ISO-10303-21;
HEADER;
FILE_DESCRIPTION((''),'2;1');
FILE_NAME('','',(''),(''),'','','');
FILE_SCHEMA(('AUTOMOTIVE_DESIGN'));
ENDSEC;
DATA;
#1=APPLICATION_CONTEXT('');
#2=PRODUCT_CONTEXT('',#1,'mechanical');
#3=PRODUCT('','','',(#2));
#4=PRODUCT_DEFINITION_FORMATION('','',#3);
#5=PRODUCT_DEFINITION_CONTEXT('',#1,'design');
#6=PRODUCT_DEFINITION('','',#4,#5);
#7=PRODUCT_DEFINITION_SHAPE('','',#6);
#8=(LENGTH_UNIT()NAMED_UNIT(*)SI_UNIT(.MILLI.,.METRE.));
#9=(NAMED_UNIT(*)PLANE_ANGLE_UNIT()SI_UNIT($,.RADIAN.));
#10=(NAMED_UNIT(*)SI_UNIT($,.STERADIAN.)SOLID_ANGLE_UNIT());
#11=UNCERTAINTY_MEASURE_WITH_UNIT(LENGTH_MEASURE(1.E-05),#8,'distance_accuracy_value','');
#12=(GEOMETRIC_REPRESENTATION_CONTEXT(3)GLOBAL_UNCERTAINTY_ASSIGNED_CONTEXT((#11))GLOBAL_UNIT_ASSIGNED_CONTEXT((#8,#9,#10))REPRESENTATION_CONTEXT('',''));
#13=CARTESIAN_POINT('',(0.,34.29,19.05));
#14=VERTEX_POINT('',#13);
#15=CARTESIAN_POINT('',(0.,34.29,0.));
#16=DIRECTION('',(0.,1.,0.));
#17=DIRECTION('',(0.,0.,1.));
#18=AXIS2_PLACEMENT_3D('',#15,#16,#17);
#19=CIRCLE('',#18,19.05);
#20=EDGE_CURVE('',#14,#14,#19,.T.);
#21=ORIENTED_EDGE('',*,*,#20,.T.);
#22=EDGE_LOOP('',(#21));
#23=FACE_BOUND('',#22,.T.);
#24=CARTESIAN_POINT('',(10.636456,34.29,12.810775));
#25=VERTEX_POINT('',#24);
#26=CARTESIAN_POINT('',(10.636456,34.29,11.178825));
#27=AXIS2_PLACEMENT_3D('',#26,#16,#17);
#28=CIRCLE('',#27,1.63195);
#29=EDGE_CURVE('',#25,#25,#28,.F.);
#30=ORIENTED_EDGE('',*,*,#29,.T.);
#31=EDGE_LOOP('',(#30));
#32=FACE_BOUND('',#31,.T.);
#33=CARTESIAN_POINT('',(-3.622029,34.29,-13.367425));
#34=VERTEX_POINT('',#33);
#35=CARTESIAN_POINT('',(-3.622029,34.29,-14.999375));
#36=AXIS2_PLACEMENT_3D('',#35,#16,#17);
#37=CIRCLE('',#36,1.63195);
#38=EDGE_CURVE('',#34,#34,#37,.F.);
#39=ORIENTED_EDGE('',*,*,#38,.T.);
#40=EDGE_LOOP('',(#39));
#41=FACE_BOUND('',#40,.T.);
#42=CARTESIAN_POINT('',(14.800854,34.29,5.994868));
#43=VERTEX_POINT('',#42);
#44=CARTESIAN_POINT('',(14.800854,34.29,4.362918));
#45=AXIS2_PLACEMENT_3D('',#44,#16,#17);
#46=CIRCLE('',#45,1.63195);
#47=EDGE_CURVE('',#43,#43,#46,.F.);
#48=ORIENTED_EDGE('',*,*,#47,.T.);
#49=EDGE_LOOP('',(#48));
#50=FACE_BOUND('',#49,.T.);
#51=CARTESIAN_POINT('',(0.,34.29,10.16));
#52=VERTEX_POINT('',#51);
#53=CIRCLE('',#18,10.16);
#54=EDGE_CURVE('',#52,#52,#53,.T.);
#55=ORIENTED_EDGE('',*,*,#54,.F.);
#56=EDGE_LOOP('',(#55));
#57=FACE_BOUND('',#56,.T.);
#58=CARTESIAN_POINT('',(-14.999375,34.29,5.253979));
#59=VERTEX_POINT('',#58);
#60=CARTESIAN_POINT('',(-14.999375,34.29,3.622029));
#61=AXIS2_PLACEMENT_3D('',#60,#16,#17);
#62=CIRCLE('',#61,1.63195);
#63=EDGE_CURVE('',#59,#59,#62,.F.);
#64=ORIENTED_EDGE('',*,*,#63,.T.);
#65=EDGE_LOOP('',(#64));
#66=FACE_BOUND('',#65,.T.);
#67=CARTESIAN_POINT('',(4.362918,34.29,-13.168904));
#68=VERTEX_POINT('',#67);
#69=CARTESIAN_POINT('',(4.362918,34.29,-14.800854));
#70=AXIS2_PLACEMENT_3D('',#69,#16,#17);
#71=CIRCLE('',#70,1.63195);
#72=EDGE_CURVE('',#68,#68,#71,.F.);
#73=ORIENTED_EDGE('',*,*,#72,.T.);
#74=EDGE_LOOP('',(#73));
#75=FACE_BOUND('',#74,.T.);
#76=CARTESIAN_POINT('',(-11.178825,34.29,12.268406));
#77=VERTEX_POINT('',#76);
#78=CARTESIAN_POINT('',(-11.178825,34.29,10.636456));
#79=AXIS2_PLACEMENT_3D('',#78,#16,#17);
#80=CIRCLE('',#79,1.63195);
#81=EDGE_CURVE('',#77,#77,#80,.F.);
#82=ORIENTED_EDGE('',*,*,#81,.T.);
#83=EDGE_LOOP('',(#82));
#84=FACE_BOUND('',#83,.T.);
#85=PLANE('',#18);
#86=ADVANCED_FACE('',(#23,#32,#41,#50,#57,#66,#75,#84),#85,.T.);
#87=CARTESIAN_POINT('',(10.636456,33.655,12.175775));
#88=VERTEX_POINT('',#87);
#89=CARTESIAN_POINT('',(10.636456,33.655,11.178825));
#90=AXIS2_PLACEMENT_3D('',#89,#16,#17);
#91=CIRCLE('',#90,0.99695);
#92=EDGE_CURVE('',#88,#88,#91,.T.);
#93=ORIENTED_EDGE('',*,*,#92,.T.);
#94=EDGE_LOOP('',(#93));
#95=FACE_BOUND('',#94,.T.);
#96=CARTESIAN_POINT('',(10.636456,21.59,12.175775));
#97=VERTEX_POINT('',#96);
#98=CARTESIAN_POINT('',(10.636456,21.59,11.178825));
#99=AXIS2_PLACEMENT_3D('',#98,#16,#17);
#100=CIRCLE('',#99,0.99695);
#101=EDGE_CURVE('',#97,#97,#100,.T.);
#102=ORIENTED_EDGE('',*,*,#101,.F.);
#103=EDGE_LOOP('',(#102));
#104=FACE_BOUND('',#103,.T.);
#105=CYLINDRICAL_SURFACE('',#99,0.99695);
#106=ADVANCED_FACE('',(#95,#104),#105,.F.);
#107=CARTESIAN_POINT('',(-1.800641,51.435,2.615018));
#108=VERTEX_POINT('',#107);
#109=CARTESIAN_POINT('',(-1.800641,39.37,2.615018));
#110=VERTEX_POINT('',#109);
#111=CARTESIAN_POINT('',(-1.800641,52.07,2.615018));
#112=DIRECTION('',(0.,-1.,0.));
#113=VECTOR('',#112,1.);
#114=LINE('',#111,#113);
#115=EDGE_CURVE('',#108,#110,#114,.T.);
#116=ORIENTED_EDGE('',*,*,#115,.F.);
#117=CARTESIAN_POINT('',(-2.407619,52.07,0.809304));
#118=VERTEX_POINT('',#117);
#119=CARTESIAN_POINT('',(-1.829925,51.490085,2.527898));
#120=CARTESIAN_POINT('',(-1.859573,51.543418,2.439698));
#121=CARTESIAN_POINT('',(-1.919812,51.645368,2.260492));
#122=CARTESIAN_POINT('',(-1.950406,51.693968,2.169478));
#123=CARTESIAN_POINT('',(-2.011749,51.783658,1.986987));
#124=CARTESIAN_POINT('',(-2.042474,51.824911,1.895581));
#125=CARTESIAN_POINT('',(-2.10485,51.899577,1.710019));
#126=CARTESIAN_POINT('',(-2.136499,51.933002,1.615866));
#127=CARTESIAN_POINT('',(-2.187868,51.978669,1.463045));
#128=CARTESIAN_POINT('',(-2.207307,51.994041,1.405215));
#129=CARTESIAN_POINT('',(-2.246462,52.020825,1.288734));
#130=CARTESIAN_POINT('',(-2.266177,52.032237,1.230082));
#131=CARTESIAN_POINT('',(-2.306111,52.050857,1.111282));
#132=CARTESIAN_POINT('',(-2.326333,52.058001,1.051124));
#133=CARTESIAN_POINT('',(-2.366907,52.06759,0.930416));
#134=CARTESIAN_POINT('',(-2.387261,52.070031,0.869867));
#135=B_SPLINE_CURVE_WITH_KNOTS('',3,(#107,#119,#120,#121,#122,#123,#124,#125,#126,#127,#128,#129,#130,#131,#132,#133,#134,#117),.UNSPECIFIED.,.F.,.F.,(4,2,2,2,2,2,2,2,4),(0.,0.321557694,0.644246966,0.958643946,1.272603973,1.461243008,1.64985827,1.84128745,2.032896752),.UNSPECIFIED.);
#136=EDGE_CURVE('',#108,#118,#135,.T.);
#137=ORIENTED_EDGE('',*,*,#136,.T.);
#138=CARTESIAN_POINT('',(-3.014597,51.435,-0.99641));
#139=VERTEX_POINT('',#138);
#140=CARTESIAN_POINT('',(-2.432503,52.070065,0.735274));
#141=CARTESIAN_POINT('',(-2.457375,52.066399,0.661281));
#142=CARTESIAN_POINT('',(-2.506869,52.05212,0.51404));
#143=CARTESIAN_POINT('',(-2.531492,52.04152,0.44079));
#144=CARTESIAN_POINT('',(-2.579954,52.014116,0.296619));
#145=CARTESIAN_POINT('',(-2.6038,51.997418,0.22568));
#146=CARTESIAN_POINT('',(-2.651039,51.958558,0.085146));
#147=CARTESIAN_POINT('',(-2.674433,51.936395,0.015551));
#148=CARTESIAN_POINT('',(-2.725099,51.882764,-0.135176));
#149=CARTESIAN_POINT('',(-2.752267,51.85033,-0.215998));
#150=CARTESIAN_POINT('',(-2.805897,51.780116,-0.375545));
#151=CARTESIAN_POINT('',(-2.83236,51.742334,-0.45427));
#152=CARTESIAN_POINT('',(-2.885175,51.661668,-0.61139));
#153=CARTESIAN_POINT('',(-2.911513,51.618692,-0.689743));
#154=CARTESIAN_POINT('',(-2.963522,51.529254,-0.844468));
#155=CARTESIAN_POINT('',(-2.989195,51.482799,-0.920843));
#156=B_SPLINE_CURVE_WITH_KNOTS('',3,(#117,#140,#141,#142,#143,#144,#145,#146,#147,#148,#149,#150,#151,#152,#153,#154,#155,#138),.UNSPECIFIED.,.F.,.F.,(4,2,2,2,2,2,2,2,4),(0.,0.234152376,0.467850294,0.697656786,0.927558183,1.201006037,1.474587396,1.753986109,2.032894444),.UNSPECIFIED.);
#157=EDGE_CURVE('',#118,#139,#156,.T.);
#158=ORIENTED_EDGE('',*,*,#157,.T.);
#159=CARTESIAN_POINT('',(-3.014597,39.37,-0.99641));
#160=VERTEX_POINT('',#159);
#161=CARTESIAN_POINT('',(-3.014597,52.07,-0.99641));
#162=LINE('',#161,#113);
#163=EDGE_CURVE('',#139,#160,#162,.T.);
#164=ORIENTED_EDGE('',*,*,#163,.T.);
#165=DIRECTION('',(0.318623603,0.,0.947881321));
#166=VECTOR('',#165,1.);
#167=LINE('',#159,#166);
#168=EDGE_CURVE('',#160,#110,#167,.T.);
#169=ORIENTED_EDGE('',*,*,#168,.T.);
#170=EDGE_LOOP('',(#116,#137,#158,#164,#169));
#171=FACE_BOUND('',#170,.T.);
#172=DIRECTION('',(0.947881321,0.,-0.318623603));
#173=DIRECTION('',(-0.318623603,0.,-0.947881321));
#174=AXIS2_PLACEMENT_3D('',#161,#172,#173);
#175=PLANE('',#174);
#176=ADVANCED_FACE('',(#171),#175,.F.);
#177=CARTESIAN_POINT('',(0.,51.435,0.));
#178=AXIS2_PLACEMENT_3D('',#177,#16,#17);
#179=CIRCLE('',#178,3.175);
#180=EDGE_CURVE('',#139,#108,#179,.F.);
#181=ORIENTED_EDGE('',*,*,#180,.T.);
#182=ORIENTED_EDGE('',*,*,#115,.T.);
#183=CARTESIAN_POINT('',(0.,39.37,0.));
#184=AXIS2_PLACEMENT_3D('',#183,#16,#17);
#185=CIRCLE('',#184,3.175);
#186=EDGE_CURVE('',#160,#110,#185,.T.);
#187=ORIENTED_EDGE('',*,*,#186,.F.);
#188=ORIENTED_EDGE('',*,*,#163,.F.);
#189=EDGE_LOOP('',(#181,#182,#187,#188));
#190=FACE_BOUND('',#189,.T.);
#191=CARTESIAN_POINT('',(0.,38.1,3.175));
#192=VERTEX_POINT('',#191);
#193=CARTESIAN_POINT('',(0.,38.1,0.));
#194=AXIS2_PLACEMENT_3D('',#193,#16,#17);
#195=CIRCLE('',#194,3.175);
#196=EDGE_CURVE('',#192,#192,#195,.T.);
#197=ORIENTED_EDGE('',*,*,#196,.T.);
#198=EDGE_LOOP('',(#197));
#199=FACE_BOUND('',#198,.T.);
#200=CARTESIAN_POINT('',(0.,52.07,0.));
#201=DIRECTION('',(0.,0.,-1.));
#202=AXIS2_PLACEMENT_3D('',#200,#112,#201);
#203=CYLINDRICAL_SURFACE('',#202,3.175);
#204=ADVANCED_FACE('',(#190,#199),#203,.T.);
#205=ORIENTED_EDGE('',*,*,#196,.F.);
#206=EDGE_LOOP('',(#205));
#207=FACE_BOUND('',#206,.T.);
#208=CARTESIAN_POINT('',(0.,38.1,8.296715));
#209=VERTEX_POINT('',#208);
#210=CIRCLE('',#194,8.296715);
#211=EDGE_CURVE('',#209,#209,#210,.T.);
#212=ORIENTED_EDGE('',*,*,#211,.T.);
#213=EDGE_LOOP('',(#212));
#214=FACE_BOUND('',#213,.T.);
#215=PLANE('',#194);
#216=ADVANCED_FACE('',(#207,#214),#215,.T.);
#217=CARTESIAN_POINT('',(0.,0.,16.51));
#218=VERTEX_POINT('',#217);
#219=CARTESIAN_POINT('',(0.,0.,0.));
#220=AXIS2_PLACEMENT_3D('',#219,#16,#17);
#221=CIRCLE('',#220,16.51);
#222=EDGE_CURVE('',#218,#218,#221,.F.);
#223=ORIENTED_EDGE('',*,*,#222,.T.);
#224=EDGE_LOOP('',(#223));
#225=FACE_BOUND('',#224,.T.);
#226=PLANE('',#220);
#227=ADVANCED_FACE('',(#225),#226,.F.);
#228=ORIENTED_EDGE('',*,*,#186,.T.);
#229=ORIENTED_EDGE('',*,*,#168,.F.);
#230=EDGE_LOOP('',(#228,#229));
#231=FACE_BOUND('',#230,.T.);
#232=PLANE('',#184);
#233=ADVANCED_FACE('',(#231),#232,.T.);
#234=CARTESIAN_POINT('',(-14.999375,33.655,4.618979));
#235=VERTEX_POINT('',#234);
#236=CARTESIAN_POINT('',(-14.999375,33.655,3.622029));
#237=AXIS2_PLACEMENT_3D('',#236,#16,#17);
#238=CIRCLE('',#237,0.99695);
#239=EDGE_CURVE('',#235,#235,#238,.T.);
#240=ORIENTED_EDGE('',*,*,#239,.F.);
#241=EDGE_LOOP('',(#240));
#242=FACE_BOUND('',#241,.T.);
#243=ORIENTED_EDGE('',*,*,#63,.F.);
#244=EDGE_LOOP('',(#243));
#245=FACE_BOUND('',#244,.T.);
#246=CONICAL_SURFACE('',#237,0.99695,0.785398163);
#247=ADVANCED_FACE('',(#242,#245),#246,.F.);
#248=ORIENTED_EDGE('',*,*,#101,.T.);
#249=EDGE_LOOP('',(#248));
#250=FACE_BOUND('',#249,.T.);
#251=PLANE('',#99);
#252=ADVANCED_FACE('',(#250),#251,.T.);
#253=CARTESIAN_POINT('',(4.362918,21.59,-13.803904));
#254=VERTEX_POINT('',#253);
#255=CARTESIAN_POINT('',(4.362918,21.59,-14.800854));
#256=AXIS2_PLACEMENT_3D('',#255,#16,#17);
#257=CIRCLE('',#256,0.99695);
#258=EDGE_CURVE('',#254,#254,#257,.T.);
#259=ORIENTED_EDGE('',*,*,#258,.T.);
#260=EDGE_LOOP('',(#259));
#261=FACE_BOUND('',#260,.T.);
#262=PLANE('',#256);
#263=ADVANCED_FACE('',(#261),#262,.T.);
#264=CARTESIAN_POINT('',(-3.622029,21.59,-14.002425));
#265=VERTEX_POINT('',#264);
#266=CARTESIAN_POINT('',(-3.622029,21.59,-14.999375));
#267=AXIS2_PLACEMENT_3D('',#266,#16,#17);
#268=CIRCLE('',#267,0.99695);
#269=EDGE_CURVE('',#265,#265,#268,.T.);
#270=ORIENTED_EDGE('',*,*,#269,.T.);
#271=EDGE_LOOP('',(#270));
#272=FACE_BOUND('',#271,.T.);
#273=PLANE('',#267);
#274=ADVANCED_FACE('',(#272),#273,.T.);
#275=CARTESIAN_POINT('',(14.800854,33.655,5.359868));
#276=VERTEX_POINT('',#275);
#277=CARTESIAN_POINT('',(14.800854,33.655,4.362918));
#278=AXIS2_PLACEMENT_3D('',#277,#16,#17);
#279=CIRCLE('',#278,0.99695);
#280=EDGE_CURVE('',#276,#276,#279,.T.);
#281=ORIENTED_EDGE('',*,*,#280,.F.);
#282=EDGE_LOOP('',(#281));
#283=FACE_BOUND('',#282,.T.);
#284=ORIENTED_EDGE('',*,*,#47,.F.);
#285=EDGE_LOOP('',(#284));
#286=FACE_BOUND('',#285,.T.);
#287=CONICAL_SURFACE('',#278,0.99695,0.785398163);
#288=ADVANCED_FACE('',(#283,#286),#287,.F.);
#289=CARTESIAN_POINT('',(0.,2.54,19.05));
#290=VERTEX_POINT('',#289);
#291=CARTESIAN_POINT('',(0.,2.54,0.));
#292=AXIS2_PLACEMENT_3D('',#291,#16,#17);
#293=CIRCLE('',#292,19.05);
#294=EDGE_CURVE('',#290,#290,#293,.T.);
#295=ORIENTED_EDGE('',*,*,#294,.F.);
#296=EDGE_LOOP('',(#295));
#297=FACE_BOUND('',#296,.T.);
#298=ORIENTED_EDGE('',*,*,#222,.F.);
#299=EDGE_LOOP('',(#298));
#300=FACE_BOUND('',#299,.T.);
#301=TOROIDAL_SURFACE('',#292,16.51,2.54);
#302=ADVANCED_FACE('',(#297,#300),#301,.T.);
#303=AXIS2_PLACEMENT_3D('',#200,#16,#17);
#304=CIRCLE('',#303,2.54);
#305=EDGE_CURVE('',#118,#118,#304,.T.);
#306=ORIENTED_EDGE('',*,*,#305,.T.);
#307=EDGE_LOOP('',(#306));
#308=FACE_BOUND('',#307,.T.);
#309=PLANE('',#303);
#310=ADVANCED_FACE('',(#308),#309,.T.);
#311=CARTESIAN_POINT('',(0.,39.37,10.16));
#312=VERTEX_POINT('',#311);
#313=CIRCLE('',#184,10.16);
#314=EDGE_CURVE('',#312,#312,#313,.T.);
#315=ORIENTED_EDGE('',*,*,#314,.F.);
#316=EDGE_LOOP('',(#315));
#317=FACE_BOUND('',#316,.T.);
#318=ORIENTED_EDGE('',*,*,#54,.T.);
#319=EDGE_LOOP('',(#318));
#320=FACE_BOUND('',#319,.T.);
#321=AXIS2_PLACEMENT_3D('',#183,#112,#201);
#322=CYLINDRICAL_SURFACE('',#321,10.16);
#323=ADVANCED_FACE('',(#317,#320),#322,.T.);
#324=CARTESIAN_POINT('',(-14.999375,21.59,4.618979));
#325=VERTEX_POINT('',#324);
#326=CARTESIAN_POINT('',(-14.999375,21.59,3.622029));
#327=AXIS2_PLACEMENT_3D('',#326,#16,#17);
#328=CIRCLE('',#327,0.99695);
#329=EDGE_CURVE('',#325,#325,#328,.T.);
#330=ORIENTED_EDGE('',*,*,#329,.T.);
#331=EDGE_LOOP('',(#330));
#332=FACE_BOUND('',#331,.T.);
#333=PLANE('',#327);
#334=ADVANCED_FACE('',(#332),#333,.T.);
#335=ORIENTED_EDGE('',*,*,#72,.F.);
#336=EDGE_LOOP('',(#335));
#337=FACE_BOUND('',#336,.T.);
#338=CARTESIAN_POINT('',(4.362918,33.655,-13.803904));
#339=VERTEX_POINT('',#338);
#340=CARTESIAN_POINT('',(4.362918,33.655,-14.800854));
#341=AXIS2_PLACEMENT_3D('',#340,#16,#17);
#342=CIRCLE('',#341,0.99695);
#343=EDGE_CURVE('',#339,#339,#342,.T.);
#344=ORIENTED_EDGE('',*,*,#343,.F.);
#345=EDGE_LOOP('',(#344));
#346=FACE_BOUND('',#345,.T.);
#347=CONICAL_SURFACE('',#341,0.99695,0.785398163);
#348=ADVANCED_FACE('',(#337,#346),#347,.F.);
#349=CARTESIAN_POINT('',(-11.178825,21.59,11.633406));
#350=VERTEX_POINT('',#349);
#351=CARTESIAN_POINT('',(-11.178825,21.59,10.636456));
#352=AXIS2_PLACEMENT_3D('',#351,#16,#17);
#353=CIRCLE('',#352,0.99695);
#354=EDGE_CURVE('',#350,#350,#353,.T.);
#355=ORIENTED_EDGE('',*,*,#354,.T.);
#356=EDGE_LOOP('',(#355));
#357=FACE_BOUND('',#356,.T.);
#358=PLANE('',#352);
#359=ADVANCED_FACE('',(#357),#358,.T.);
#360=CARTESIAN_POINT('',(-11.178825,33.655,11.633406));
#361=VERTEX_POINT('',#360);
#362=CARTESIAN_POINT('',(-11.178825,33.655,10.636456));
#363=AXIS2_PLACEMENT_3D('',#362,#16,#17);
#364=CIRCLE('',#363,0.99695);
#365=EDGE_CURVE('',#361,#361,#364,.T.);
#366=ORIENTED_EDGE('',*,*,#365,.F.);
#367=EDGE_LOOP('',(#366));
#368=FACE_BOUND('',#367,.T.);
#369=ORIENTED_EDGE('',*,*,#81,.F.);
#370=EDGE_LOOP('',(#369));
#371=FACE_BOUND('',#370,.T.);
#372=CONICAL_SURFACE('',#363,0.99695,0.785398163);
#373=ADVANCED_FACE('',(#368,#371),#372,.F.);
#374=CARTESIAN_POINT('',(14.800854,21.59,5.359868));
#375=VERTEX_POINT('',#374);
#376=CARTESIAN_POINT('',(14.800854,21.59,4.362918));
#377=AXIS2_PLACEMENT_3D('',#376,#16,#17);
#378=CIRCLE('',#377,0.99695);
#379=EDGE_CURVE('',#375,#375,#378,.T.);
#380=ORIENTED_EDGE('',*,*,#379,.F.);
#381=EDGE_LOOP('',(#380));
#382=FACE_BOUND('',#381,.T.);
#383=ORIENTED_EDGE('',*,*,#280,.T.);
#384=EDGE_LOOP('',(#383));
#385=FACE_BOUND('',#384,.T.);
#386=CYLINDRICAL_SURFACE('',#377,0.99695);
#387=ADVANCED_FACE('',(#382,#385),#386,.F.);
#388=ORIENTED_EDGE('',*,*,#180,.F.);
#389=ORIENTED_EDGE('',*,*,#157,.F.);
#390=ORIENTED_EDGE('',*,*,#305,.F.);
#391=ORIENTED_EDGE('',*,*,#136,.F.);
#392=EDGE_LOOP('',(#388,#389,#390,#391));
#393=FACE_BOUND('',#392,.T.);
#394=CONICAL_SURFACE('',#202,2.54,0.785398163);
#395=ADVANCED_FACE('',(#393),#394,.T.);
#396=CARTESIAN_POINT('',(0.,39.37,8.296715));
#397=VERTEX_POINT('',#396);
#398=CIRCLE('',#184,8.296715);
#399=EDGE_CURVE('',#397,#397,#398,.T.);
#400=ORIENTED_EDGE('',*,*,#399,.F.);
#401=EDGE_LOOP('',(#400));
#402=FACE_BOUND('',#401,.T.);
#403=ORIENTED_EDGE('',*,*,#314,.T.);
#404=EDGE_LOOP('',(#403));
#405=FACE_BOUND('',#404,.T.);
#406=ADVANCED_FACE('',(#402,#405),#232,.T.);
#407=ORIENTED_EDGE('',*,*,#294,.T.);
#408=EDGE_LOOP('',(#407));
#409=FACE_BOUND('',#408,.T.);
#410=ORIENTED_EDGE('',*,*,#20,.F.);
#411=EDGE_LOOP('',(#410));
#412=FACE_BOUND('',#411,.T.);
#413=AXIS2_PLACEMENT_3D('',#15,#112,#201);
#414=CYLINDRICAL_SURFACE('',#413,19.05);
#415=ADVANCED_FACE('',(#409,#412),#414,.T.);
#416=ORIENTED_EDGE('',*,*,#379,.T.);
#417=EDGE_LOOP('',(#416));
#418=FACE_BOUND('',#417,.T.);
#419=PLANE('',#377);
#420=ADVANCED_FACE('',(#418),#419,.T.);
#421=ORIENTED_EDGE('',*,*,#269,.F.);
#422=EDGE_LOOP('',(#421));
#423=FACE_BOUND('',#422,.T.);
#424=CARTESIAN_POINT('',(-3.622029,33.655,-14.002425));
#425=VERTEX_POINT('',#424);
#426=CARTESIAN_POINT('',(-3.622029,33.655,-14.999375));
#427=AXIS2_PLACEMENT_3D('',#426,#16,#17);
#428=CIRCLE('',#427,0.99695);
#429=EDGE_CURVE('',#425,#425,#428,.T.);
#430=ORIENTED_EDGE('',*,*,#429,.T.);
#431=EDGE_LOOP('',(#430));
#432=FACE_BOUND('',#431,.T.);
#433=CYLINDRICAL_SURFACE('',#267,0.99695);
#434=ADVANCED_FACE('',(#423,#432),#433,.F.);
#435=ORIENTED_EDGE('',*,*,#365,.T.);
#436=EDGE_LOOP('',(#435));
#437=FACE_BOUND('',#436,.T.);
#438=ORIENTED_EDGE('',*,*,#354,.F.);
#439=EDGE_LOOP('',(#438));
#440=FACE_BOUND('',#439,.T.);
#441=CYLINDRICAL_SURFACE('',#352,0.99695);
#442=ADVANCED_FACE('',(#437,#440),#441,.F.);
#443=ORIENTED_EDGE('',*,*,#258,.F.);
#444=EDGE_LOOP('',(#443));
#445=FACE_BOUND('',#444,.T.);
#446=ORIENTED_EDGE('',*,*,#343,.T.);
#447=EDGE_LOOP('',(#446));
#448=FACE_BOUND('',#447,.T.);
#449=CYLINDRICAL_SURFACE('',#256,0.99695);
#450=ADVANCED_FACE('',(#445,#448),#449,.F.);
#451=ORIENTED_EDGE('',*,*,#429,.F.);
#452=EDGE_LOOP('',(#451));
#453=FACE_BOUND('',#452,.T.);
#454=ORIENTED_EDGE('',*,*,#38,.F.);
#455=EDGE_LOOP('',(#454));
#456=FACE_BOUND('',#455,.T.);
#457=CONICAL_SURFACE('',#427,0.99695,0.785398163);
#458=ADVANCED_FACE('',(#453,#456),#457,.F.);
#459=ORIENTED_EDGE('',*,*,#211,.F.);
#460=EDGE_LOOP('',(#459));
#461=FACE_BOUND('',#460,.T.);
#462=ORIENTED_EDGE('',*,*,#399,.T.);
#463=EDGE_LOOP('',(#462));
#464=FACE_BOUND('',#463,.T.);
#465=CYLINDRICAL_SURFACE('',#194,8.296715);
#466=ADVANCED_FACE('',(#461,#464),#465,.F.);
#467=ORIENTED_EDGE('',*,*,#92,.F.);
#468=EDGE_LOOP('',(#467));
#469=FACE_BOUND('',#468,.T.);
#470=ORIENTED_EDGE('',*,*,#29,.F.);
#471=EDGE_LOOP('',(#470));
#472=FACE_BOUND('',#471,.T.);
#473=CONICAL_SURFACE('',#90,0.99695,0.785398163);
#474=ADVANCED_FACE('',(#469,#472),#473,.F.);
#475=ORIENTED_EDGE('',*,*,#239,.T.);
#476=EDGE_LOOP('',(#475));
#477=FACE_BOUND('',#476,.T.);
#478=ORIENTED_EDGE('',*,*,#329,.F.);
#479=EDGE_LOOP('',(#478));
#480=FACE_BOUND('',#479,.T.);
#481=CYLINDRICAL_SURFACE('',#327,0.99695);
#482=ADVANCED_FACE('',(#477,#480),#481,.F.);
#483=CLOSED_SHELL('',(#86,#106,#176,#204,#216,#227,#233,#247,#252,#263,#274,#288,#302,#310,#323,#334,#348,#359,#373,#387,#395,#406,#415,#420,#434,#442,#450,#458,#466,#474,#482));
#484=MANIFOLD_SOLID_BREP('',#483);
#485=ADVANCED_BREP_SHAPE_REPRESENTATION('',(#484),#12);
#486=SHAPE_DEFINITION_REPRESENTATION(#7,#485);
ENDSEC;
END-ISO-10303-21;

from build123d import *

# Parameters (mm, degrees)
SKETCH1_R           = 19.05
BOSS_EXTRUDE1_DEPTH = 34.29
SKETCH3_R           = 10.16
BOSS_EXTRUDE3_DEPTH = 5.08
BOSS_EXTRUDE4_DEPTH = 12.7
FILLET1_R           = 2.54
CHAMFER1_SIZE       = 0.635
SKETCH5_R           = 0.99695
CUT_EXTRUDE1_DEPTH  = 12.7
CHAMFER2_SIZE       = 0.635
CUT_EXTRUDE2_START  = -1.27
SKETCH6_R           = 8.296715315
SKETCH6_R_2         = 3.175
CUT_EXTRUDE2_DEPTH  = 1.27


with BuildPart() as part:
    # Sketch1 → Boss-Extrude1 (new body)
    with BuildSketch(Plane(origin=(0, 0, 0), x_dir=(1, 0, 0), z_dir=(0, 1, 0))):
        with Locations(Location((0, 0, 0), (0, 0, 270))):
            Circle(SKETCH1_R)
    extrude(amount=BOSS_EXTRUDE1_DEPTH)

    # Sketch3 → Boss-Extrude3 (add)
    with BuildSketch(Plane(origin=(0, 34.29, 0), x_dir=(1, 0, 0), z_dir=(0, 1, 0))):
        with Locations(Location((0, 0, 0), (0, 0, 270))):
            Circle(SKETCH3_R)
    extrude(amount=BOSS_EXTRUDE3_DEPTH)

    # Sketch4 → Boss-Extrude4 (add)
    with BuildSketch(Plane(origin=(0, 39.37, 0), x_dir=(1, 0, 0), z_dir=(0, 1, 0))):
        with BuildLine():
            Line((-3.01459652, 0.996409965), (-1.800640593, -2.615017869))
            ThreePointArc((-1.800640593, -2.615017869), (3.009523196, 1.01162994), (-3.01459652, 0.996409965))
        make_face()
    extrude(amount=BOSS_EXTRUDE4_DEPTH)

    # Fillet1
    fillet1_edges = [part.edges().sort_by_distance(p)[0] for p in [
        (0, 0, -19.05),
    ]]
    fillet(fillet1_edges, radius=FILLET1_R)

    # Chamfer1
    chamfer1_edges = [part.edges().sort_by_distance(p)[0] for p in [
        (3.009523196, 52.07, -1.01162994),
    ]]
    chamfer(chamfer1_edges, length=CHAMFER1_SIZE - 0.0001)  # a hair under: the kernel refuses the full size

    # Sketch5 → Cut-Extrude1 (cut)
    with BuildSketch(Plane(origin=(0, 34.29, 0), x_dir=(1, 0, 0), z_dir=(0, 1, 0))):
        with Locations(Location((-11.178825066, -10.636456195, 0), (0, 0, 270))):
            Circle(SKETCH5_R)
        with Locations(Location((-14.999374589, -3.622028738, 0), (0, 0, 270))):
            Circle(SKETCH5_R)
        with Locations(Location((-3.622028738, 14.999374589, 0), (0, 0, 270))):
            Circle(SKETCH5_R)
        with Locations(Location((4.362918394, 14.800853804, 0), (0, 0, 270))):
            Circle(SKETCH5_R)
        with Locations(Location((14.800853804, -4.362918394, 0), (0, 0, 270))):
            Circle(SKETCH5_R)
        with Locations(Location((10.636456195, -11.178825066, 0), (0, 0, 270))):
            Circle(SKETCH5_R)
    extrude(amount=-CUT_EXTRUDE1_DEPTH, mode=Mode.SUBTRACT)

    # Chamfer2
    chamfer2_edges = [part.edges().sort_by_distance(p)[0] for p in [
        (10.636456195, 34.29, 10.181875066),
        (14.800853804, 34.29, 3.365968394),
        (4.362918394, 34.29, -15.797803804),
        (-3.622028738, 34.29, -15.996324589),
        (-14.999374589, 34.29, 2.625078738),
        (-11.178825066, 34.29, 9.639506195),
    ]]
    chamfer(chamfer2_edges, length=CHAMFER2_SIZE)

    # Sketch6 → Cut-Extrude2 (cut)
    with BuildSketch(Plane(origin=(0, 39.37, 0), x_dir=(1, 0, 0), z_dir=(0, 1, 0)).offset(CUT_EXTRUDE2_START)):
        with Locations(Location((0, 0, 0), (0, 0, 270))):
            Circle(SKETCH6_R)
        with Locations(Location((0, 0, 0), (0, 0, 161.709808999))):
            Circle(SKETCH6_R_2, mode=Mode.SUBTRACT)
    extrude(amount=CUT_EXTRUDE2_DEPTH, mode=Mode.SUBTRACT)


solid = part.part
